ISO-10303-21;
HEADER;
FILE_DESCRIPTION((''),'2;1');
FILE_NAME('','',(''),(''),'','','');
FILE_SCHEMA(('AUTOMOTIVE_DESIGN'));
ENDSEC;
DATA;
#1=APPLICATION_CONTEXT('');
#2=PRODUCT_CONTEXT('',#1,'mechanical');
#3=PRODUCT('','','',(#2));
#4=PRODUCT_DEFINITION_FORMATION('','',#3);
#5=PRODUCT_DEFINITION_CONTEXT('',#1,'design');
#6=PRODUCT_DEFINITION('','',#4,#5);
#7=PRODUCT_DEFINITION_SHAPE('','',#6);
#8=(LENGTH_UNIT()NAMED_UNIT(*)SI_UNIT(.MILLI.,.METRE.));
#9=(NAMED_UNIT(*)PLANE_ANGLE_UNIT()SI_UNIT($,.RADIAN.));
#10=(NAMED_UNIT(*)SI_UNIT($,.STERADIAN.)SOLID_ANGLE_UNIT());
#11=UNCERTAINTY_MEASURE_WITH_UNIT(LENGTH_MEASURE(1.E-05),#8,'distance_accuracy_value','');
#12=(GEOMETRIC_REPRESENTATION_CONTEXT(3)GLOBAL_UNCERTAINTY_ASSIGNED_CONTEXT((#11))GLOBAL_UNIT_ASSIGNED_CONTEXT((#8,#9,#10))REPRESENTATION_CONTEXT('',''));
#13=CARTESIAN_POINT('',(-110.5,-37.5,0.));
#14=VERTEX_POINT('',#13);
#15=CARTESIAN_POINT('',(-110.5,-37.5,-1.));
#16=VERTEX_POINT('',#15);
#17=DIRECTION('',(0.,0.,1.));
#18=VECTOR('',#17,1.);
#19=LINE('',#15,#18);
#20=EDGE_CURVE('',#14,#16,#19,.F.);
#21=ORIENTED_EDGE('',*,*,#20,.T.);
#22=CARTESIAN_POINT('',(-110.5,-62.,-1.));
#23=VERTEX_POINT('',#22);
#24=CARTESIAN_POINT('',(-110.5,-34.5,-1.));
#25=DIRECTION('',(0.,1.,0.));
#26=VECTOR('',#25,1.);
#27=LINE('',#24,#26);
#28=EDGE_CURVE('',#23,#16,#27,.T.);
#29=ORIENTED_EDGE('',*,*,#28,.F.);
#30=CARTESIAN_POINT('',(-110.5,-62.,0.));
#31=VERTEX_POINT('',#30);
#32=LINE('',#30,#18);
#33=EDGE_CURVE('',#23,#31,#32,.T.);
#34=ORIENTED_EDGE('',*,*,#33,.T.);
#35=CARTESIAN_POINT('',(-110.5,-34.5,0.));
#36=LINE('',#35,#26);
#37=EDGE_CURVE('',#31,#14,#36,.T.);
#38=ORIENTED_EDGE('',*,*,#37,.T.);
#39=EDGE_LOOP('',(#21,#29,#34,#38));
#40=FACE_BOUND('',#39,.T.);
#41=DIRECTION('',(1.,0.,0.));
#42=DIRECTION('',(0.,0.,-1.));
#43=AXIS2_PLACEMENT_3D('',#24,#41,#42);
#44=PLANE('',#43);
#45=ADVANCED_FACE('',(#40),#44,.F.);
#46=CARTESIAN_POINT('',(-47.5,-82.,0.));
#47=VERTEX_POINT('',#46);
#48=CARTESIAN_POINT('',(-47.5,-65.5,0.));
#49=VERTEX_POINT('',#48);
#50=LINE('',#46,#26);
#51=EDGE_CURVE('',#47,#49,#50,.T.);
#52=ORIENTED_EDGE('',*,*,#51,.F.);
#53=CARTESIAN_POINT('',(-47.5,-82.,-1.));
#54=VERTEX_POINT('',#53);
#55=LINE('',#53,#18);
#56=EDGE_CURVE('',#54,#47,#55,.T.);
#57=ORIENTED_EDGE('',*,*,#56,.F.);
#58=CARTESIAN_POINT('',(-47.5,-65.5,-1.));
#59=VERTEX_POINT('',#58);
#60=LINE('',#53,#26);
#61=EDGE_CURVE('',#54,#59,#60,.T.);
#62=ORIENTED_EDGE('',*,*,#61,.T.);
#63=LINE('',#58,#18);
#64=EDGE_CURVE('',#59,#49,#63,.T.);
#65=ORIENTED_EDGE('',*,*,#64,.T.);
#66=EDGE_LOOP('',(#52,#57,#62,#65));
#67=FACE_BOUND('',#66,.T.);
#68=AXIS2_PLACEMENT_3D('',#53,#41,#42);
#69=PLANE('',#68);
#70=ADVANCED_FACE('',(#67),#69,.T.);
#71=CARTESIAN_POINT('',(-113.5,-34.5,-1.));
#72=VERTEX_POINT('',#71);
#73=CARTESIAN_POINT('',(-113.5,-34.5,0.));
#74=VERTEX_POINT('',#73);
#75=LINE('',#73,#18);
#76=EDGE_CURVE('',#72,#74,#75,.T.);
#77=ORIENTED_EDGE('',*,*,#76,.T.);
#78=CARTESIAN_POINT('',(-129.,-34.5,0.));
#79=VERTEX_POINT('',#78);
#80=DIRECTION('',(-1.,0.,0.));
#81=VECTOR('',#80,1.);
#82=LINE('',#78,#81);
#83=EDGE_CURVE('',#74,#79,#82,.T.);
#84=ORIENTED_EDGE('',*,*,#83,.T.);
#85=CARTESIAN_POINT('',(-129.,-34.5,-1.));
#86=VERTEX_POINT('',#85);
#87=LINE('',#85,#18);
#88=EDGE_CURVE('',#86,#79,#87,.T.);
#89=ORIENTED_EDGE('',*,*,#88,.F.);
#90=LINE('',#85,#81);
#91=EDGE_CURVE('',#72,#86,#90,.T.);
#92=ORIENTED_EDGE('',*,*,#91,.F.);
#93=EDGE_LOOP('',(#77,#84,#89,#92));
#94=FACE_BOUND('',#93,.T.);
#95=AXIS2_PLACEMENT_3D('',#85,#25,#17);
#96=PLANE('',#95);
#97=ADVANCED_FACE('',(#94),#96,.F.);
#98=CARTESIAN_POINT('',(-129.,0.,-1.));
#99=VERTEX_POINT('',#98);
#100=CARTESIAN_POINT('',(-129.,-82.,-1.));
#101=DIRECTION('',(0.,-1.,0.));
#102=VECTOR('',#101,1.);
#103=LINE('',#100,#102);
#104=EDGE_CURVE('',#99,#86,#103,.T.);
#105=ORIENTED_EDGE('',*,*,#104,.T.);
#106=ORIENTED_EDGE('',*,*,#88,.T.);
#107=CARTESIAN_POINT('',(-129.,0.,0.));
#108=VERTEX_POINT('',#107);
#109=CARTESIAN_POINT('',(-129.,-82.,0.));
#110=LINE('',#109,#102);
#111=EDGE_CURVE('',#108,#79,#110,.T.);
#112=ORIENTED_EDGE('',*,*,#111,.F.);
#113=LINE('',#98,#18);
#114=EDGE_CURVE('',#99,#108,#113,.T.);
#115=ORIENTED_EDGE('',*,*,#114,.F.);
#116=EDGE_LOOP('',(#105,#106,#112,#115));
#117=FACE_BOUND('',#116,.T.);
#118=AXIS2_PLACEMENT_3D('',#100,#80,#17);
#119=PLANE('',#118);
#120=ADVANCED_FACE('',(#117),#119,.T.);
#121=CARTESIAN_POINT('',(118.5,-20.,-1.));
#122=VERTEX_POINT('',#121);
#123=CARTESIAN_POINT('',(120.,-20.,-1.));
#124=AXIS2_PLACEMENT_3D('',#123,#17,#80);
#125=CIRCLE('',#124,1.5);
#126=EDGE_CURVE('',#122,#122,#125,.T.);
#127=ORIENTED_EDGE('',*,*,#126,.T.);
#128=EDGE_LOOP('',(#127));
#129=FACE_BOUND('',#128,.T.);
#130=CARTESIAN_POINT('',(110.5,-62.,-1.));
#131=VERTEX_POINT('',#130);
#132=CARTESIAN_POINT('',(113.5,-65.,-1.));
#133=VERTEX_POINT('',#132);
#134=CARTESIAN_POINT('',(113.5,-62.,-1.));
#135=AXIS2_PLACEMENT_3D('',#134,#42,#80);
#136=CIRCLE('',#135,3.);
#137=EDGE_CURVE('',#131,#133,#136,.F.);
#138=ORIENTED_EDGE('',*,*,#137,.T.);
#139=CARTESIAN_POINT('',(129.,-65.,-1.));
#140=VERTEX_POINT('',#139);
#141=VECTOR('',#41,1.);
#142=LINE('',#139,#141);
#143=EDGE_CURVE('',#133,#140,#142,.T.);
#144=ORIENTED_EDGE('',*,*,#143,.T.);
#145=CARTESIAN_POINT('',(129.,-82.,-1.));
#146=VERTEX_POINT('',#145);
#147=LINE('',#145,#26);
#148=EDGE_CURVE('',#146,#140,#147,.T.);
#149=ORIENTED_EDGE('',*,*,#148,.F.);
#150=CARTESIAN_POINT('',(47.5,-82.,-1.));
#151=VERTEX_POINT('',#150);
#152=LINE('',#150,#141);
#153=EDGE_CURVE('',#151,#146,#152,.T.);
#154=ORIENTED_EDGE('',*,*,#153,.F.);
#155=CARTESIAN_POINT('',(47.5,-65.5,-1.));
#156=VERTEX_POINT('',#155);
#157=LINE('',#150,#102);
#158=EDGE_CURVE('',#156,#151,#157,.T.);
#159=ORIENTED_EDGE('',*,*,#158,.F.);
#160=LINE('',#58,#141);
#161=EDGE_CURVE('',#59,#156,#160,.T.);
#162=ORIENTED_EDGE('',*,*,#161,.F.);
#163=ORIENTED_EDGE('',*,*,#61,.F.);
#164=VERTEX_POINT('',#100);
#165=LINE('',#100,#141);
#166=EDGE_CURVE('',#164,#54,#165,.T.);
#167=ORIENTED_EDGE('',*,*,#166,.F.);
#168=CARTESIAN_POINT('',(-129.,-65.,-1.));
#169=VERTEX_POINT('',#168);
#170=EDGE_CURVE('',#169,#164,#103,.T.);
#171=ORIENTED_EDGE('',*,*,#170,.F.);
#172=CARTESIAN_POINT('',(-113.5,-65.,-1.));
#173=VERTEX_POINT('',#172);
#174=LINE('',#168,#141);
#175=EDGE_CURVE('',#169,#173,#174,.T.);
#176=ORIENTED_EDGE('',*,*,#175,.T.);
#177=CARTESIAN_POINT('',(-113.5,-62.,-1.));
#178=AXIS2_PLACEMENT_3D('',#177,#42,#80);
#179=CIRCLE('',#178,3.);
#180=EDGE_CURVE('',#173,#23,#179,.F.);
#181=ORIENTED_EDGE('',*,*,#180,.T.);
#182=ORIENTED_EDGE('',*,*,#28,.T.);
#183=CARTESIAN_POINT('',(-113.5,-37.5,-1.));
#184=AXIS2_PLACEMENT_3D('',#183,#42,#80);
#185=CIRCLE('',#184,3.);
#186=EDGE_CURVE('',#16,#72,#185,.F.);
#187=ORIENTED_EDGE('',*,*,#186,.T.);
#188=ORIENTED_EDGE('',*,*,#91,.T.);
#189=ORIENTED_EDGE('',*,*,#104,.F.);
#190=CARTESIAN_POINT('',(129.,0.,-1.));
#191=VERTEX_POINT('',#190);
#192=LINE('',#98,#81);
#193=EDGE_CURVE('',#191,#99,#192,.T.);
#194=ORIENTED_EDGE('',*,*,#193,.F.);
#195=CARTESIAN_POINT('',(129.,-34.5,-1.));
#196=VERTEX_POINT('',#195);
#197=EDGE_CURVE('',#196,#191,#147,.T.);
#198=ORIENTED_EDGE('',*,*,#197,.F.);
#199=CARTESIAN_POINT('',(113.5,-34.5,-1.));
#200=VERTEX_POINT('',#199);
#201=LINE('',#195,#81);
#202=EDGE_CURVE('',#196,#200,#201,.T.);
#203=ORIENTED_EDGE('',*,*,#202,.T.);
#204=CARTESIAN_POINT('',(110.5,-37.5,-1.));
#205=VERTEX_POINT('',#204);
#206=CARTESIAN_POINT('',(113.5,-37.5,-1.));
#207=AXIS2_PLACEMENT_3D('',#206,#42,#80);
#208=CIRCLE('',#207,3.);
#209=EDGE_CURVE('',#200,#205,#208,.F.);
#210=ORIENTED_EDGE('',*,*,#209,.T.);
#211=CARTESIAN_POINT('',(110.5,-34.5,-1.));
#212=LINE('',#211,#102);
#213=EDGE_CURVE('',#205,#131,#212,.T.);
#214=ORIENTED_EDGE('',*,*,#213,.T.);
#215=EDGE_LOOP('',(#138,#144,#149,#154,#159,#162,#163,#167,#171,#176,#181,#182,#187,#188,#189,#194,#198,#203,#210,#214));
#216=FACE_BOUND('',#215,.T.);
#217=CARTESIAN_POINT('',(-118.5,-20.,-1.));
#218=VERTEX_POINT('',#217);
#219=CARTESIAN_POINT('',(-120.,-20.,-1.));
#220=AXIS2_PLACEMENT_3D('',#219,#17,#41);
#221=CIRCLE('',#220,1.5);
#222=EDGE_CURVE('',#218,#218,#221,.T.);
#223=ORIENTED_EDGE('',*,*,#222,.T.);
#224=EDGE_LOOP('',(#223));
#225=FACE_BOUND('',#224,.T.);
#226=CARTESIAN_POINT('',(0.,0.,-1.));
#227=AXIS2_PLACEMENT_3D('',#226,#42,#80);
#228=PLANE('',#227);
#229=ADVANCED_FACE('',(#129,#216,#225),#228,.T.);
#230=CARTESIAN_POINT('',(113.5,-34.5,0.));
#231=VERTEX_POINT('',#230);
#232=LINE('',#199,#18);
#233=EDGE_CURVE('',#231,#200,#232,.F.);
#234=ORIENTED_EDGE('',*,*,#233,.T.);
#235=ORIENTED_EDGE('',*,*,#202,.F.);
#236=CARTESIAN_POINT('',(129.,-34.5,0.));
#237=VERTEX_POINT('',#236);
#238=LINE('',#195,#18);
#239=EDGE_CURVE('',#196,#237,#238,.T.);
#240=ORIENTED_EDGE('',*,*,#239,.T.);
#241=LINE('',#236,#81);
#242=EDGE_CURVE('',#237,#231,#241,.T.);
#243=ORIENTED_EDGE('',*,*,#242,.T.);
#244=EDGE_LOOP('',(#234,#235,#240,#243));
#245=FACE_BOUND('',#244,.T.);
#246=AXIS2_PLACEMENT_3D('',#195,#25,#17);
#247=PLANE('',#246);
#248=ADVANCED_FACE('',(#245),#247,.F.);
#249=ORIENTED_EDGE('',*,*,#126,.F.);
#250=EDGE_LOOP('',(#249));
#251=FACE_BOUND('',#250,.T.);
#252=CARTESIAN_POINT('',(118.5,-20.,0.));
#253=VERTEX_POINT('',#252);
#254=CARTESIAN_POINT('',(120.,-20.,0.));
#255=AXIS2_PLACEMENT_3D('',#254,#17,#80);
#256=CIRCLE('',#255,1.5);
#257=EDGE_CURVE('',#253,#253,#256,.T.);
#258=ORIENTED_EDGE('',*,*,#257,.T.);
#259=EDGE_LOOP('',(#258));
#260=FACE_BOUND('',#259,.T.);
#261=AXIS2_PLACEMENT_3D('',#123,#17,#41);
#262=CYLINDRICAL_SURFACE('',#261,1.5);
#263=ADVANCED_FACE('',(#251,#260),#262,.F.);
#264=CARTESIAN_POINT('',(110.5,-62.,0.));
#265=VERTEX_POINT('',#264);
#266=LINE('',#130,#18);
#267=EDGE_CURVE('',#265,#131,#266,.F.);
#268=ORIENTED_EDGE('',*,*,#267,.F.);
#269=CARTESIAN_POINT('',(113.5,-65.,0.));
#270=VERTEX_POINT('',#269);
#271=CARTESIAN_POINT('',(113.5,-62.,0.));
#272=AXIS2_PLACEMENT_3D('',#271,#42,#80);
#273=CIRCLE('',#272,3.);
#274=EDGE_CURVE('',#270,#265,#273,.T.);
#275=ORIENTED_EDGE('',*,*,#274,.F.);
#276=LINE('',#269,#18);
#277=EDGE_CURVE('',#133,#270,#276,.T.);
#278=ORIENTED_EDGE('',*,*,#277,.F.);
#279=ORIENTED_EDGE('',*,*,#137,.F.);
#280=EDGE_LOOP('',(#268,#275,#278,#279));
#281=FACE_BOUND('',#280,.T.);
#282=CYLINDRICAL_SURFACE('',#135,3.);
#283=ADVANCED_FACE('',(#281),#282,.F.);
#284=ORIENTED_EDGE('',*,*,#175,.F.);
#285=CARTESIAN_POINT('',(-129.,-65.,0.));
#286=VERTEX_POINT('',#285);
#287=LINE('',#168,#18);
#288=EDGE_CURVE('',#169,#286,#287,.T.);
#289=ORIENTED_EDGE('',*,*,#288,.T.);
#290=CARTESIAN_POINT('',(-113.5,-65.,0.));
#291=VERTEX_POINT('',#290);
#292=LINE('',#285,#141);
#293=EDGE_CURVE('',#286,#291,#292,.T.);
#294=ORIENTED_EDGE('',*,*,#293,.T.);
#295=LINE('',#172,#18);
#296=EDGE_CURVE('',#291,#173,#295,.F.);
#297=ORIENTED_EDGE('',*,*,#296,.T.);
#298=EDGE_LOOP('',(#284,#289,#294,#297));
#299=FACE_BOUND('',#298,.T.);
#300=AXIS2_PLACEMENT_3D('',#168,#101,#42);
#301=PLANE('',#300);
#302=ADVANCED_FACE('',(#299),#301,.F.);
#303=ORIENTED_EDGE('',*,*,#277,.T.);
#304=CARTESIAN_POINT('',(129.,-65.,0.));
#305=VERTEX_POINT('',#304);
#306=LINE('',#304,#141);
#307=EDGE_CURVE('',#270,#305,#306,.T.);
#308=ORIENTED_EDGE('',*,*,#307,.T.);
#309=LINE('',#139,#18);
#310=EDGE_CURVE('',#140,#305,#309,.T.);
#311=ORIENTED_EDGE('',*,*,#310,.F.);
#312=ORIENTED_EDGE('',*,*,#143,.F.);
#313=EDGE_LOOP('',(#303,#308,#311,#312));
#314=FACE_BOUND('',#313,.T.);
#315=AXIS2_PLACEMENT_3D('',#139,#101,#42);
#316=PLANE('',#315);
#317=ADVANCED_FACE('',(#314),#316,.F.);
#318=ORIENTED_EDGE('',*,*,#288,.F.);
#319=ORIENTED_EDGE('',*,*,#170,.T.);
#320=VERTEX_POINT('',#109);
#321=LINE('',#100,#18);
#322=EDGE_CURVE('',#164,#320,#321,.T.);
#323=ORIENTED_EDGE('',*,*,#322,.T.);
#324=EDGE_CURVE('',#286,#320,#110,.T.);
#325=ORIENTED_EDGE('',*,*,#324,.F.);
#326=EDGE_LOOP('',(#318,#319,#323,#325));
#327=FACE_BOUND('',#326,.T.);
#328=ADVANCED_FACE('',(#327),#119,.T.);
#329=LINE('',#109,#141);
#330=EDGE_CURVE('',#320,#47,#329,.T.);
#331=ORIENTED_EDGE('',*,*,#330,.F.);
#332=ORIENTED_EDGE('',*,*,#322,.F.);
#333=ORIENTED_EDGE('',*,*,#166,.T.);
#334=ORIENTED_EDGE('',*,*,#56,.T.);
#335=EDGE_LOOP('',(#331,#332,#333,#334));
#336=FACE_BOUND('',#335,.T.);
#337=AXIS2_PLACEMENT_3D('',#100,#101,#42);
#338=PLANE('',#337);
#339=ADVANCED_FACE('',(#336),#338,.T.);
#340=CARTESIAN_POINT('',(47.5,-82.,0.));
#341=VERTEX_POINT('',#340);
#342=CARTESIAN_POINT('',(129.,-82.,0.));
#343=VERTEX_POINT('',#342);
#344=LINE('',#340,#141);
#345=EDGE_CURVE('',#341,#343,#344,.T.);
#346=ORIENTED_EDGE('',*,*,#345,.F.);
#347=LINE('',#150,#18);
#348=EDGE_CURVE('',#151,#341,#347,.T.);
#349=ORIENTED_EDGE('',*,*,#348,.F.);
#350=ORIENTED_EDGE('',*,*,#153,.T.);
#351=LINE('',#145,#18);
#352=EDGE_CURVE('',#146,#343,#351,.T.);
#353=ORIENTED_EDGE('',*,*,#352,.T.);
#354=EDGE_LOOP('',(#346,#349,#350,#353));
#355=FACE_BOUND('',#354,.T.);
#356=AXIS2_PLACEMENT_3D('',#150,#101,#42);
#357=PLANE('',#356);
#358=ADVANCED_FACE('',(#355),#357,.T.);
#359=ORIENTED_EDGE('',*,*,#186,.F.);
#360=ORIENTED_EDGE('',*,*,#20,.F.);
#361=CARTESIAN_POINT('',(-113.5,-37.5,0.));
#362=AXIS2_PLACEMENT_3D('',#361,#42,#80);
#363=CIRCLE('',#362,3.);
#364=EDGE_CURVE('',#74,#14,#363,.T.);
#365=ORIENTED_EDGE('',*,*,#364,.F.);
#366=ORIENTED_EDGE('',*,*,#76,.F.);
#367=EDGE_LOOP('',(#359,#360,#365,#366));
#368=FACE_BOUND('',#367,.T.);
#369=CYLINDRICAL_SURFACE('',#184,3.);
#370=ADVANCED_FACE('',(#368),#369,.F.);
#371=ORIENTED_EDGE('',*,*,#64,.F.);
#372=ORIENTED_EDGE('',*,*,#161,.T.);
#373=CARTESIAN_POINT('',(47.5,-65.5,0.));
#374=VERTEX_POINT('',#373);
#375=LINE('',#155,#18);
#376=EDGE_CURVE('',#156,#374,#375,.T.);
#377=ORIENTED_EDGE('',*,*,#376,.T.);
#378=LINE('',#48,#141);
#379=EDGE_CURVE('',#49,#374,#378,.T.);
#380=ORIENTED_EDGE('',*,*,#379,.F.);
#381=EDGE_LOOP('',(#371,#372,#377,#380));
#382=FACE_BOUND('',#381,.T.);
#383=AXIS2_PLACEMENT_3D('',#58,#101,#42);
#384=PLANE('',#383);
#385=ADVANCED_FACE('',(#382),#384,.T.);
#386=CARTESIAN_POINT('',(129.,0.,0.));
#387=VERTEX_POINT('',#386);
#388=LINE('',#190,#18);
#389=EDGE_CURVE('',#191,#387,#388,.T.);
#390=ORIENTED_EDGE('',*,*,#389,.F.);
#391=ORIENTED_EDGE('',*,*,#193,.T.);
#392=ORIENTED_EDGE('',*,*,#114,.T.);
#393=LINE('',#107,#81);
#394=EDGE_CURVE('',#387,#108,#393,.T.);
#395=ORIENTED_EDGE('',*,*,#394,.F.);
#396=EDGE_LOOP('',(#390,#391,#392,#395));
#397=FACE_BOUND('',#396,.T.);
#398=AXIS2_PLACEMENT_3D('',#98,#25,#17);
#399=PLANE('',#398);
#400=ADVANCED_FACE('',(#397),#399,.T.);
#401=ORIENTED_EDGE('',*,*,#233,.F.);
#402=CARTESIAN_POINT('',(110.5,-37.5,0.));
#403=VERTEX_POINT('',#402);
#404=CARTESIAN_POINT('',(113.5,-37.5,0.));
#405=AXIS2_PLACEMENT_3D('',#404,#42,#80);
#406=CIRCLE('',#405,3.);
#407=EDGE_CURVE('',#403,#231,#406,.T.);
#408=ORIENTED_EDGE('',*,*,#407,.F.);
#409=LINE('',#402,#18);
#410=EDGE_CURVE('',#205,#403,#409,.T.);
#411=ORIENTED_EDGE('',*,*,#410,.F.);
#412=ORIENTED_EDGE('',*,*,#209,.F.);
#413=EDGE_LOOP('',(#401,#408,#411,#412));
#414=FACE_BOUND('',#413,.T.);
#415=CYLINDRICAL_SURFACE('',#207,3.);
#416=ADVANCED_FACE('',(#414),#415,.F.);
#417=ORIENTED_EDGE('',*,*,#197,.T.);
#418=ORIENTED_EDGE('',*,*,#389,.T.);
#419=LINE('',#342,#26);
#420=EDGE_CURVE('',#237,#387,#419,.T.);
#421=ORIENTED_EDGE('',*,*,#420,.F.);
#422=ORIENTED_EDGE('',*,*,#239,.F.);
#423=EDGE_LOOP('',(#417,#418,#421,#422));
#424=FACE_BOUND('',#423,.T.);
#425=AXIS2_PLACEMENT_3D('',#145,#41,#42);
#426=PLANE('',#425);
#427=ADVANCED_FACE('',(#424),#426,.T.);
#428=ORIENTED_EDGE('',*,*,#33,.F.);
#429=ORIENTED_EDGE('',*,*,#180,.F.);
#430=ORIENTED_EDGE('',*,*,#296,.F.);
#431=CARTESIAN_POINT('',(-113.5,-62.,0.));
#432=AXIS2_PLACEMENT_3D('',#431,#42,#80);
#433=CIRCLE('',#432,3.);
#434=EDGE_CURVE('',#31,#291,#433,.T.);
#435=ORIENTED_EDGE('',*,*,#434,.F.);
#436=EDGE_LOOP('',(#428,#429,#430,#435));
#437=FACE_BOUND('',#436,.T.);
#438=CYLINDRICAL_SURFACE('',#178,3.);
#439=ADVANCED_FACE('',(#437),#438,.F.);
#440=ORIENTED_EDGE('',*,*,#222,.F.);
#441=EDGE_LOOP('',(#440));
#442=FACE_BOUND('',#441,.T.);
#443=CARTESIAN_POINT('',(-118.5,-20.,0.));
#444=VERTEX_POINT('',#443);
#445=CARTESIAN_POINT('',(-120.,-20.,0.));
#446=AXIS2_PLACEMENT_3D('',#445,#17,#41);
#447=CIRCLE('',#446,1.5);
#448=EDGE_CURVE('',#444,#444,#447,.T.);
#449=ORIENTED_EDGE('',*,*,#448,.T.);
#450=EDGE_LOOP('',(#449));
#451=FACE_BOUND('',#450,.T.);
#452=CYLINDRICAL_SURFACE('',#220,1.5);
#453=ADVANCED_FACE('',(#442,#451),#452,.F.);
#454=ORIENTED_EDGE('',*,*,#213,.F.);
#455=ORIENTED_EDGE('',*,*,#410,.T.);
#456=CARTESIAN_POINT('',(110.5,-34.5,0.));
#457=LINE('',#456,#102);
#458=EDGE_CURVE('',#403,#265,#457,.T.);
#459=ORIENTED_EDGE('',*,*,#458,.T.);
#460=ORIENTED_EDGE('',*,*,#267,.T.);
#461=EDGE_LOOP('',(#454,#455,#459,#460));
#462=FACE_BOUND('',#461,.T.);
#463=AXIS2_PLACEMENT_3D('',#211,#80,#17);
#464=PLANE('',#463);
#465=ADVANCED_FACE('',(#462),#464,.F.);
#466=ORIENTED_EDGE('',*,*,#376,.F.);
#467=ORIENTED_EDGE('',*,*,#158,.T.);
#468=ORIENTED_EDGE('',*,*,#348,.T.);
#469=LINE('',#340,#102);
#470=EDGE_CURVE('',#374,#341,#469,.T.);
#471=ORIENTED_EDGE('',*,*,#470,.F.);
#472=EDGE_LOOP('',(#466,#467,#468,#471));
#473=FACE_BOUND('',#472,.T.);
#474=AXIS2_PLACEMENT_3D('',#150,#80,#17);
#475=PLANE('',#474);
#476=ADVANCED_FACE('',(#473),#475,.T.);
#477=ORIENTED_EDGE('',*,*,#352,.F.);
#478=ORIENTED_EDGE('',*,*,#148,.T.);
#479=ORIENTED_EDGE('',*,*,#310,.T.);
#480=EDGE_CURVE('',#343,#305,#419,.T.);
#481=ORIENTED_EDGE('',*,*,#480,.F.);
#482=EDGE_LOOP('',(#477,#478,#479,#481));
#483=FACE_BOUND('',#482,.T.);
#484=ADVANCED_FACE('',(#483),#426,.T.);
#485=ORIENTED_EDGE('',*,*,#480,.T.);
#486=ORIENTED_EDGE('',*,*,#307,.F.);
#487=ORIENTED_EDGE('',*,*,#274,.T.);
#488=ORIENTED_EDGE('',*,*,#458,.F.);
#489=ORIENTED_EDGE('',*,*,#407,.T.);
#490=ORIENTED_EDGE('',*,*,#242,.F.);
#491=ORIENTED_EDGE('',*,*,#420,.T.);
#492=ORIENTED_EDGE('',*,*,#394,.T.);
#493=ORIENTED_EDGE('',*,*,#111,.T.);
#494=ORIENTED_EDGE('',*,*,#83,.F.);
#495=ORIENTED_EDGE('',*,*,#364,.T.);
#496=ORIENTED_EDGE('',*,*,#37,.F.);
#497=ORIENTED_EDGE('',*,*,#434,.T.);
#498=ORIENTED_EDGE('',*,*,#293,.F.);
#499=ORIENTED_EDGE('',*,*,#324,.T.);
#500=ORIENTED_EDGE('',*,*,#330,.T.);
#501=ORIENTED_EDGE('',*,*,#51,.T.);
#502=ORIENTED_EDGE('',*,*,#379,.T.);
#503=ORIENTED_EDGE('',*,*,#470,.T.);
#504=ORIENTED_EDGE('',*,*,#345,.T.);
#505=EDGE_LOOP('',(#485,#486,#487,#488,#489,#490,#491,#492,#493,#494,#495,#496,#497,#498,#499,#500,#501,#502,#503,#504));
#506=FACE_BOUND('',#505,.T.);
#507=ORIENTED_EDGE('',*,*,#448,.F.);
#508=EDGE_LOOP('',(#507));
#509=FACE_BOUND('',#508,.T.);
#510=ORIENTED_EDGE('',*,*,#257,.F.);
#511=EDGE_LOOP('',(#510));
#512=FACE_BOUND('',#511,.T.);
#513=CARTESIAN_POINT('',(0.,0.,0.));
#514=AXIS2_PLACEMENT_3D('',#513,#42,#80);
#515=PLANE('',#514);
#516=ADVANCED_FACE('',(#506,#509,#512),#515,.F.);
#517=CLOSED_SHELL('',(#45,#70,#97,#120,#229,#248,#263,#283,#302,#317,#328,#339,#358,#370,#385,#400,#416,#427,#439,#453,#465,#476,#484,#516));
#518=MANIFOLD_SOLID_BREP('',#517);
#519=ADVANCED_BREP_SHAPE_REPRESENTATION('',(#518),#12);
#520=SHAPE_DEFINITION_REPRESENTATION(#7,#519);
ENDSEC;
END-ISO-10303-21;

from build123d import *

# Parameters (mm, degrees)
T_LE_DE_BASE_PLI_E1_DEPTH = 1
ESQUISSE6_R               = 1.5
ESQUISSE6_W               = 18.5
ESQUISSE6_H               = 30.5
ENL_V_MAT_EXTRU_1_DEPTH   = 1
CONG_1_R                  = 3


# Sheet-metal steps are written as plain solids
with BuildPart() as part:
    # Esquisse1 → Tôle de base pliée1 (new body)
    with BuildSketch(Plane.XY):
        Polygon((47.5, -82), (129, -82), (129, 0), (-129, 0), (-129, -82), (-47.5, -82), (-47.5, -65.5), (47.5, -65.5), align=None)
    extrude(amount=-T_LE_DE_BASE_PLI_E1_DEPTH)

    # Esquisse6 → Enlèv. mat.-Extru.1 (cut)
    with BuildSketch(Plane.XY):
        with Locations((-120, -20)):
            Circle(ESQUISSE6_R)
        with Locations(Location((120, -20, 0), (0, 0, 180))):
            Circle(ESQUISSE6_R)
        with Locations((-119.75, -49.75)):
            Rectangle(ESQUISSE6_W, ESQUISSE6_H)
        with Locations((119.75, -49.75)):
            Rectangle(ESQUISSE6_W, ESQUISSE6_H)
    extrude(amount=-ENL_V_MAT_EXTRU_1_DEPTH, mode=Mode.SUBTRACT)

    # Congé1
    cong_1_edges = [part.edges().sort_by_distance(p)[0] for p in [
        (110.5, -65, -0.5),
        (110.5, -34.5, -0.5),
        (-110.5, -34.5, -0.5),
        (-110.5, -65, -0.5),
    ]]
    fillet(cong_1_edges, radius=CONG_1_R)


solid = part.part
